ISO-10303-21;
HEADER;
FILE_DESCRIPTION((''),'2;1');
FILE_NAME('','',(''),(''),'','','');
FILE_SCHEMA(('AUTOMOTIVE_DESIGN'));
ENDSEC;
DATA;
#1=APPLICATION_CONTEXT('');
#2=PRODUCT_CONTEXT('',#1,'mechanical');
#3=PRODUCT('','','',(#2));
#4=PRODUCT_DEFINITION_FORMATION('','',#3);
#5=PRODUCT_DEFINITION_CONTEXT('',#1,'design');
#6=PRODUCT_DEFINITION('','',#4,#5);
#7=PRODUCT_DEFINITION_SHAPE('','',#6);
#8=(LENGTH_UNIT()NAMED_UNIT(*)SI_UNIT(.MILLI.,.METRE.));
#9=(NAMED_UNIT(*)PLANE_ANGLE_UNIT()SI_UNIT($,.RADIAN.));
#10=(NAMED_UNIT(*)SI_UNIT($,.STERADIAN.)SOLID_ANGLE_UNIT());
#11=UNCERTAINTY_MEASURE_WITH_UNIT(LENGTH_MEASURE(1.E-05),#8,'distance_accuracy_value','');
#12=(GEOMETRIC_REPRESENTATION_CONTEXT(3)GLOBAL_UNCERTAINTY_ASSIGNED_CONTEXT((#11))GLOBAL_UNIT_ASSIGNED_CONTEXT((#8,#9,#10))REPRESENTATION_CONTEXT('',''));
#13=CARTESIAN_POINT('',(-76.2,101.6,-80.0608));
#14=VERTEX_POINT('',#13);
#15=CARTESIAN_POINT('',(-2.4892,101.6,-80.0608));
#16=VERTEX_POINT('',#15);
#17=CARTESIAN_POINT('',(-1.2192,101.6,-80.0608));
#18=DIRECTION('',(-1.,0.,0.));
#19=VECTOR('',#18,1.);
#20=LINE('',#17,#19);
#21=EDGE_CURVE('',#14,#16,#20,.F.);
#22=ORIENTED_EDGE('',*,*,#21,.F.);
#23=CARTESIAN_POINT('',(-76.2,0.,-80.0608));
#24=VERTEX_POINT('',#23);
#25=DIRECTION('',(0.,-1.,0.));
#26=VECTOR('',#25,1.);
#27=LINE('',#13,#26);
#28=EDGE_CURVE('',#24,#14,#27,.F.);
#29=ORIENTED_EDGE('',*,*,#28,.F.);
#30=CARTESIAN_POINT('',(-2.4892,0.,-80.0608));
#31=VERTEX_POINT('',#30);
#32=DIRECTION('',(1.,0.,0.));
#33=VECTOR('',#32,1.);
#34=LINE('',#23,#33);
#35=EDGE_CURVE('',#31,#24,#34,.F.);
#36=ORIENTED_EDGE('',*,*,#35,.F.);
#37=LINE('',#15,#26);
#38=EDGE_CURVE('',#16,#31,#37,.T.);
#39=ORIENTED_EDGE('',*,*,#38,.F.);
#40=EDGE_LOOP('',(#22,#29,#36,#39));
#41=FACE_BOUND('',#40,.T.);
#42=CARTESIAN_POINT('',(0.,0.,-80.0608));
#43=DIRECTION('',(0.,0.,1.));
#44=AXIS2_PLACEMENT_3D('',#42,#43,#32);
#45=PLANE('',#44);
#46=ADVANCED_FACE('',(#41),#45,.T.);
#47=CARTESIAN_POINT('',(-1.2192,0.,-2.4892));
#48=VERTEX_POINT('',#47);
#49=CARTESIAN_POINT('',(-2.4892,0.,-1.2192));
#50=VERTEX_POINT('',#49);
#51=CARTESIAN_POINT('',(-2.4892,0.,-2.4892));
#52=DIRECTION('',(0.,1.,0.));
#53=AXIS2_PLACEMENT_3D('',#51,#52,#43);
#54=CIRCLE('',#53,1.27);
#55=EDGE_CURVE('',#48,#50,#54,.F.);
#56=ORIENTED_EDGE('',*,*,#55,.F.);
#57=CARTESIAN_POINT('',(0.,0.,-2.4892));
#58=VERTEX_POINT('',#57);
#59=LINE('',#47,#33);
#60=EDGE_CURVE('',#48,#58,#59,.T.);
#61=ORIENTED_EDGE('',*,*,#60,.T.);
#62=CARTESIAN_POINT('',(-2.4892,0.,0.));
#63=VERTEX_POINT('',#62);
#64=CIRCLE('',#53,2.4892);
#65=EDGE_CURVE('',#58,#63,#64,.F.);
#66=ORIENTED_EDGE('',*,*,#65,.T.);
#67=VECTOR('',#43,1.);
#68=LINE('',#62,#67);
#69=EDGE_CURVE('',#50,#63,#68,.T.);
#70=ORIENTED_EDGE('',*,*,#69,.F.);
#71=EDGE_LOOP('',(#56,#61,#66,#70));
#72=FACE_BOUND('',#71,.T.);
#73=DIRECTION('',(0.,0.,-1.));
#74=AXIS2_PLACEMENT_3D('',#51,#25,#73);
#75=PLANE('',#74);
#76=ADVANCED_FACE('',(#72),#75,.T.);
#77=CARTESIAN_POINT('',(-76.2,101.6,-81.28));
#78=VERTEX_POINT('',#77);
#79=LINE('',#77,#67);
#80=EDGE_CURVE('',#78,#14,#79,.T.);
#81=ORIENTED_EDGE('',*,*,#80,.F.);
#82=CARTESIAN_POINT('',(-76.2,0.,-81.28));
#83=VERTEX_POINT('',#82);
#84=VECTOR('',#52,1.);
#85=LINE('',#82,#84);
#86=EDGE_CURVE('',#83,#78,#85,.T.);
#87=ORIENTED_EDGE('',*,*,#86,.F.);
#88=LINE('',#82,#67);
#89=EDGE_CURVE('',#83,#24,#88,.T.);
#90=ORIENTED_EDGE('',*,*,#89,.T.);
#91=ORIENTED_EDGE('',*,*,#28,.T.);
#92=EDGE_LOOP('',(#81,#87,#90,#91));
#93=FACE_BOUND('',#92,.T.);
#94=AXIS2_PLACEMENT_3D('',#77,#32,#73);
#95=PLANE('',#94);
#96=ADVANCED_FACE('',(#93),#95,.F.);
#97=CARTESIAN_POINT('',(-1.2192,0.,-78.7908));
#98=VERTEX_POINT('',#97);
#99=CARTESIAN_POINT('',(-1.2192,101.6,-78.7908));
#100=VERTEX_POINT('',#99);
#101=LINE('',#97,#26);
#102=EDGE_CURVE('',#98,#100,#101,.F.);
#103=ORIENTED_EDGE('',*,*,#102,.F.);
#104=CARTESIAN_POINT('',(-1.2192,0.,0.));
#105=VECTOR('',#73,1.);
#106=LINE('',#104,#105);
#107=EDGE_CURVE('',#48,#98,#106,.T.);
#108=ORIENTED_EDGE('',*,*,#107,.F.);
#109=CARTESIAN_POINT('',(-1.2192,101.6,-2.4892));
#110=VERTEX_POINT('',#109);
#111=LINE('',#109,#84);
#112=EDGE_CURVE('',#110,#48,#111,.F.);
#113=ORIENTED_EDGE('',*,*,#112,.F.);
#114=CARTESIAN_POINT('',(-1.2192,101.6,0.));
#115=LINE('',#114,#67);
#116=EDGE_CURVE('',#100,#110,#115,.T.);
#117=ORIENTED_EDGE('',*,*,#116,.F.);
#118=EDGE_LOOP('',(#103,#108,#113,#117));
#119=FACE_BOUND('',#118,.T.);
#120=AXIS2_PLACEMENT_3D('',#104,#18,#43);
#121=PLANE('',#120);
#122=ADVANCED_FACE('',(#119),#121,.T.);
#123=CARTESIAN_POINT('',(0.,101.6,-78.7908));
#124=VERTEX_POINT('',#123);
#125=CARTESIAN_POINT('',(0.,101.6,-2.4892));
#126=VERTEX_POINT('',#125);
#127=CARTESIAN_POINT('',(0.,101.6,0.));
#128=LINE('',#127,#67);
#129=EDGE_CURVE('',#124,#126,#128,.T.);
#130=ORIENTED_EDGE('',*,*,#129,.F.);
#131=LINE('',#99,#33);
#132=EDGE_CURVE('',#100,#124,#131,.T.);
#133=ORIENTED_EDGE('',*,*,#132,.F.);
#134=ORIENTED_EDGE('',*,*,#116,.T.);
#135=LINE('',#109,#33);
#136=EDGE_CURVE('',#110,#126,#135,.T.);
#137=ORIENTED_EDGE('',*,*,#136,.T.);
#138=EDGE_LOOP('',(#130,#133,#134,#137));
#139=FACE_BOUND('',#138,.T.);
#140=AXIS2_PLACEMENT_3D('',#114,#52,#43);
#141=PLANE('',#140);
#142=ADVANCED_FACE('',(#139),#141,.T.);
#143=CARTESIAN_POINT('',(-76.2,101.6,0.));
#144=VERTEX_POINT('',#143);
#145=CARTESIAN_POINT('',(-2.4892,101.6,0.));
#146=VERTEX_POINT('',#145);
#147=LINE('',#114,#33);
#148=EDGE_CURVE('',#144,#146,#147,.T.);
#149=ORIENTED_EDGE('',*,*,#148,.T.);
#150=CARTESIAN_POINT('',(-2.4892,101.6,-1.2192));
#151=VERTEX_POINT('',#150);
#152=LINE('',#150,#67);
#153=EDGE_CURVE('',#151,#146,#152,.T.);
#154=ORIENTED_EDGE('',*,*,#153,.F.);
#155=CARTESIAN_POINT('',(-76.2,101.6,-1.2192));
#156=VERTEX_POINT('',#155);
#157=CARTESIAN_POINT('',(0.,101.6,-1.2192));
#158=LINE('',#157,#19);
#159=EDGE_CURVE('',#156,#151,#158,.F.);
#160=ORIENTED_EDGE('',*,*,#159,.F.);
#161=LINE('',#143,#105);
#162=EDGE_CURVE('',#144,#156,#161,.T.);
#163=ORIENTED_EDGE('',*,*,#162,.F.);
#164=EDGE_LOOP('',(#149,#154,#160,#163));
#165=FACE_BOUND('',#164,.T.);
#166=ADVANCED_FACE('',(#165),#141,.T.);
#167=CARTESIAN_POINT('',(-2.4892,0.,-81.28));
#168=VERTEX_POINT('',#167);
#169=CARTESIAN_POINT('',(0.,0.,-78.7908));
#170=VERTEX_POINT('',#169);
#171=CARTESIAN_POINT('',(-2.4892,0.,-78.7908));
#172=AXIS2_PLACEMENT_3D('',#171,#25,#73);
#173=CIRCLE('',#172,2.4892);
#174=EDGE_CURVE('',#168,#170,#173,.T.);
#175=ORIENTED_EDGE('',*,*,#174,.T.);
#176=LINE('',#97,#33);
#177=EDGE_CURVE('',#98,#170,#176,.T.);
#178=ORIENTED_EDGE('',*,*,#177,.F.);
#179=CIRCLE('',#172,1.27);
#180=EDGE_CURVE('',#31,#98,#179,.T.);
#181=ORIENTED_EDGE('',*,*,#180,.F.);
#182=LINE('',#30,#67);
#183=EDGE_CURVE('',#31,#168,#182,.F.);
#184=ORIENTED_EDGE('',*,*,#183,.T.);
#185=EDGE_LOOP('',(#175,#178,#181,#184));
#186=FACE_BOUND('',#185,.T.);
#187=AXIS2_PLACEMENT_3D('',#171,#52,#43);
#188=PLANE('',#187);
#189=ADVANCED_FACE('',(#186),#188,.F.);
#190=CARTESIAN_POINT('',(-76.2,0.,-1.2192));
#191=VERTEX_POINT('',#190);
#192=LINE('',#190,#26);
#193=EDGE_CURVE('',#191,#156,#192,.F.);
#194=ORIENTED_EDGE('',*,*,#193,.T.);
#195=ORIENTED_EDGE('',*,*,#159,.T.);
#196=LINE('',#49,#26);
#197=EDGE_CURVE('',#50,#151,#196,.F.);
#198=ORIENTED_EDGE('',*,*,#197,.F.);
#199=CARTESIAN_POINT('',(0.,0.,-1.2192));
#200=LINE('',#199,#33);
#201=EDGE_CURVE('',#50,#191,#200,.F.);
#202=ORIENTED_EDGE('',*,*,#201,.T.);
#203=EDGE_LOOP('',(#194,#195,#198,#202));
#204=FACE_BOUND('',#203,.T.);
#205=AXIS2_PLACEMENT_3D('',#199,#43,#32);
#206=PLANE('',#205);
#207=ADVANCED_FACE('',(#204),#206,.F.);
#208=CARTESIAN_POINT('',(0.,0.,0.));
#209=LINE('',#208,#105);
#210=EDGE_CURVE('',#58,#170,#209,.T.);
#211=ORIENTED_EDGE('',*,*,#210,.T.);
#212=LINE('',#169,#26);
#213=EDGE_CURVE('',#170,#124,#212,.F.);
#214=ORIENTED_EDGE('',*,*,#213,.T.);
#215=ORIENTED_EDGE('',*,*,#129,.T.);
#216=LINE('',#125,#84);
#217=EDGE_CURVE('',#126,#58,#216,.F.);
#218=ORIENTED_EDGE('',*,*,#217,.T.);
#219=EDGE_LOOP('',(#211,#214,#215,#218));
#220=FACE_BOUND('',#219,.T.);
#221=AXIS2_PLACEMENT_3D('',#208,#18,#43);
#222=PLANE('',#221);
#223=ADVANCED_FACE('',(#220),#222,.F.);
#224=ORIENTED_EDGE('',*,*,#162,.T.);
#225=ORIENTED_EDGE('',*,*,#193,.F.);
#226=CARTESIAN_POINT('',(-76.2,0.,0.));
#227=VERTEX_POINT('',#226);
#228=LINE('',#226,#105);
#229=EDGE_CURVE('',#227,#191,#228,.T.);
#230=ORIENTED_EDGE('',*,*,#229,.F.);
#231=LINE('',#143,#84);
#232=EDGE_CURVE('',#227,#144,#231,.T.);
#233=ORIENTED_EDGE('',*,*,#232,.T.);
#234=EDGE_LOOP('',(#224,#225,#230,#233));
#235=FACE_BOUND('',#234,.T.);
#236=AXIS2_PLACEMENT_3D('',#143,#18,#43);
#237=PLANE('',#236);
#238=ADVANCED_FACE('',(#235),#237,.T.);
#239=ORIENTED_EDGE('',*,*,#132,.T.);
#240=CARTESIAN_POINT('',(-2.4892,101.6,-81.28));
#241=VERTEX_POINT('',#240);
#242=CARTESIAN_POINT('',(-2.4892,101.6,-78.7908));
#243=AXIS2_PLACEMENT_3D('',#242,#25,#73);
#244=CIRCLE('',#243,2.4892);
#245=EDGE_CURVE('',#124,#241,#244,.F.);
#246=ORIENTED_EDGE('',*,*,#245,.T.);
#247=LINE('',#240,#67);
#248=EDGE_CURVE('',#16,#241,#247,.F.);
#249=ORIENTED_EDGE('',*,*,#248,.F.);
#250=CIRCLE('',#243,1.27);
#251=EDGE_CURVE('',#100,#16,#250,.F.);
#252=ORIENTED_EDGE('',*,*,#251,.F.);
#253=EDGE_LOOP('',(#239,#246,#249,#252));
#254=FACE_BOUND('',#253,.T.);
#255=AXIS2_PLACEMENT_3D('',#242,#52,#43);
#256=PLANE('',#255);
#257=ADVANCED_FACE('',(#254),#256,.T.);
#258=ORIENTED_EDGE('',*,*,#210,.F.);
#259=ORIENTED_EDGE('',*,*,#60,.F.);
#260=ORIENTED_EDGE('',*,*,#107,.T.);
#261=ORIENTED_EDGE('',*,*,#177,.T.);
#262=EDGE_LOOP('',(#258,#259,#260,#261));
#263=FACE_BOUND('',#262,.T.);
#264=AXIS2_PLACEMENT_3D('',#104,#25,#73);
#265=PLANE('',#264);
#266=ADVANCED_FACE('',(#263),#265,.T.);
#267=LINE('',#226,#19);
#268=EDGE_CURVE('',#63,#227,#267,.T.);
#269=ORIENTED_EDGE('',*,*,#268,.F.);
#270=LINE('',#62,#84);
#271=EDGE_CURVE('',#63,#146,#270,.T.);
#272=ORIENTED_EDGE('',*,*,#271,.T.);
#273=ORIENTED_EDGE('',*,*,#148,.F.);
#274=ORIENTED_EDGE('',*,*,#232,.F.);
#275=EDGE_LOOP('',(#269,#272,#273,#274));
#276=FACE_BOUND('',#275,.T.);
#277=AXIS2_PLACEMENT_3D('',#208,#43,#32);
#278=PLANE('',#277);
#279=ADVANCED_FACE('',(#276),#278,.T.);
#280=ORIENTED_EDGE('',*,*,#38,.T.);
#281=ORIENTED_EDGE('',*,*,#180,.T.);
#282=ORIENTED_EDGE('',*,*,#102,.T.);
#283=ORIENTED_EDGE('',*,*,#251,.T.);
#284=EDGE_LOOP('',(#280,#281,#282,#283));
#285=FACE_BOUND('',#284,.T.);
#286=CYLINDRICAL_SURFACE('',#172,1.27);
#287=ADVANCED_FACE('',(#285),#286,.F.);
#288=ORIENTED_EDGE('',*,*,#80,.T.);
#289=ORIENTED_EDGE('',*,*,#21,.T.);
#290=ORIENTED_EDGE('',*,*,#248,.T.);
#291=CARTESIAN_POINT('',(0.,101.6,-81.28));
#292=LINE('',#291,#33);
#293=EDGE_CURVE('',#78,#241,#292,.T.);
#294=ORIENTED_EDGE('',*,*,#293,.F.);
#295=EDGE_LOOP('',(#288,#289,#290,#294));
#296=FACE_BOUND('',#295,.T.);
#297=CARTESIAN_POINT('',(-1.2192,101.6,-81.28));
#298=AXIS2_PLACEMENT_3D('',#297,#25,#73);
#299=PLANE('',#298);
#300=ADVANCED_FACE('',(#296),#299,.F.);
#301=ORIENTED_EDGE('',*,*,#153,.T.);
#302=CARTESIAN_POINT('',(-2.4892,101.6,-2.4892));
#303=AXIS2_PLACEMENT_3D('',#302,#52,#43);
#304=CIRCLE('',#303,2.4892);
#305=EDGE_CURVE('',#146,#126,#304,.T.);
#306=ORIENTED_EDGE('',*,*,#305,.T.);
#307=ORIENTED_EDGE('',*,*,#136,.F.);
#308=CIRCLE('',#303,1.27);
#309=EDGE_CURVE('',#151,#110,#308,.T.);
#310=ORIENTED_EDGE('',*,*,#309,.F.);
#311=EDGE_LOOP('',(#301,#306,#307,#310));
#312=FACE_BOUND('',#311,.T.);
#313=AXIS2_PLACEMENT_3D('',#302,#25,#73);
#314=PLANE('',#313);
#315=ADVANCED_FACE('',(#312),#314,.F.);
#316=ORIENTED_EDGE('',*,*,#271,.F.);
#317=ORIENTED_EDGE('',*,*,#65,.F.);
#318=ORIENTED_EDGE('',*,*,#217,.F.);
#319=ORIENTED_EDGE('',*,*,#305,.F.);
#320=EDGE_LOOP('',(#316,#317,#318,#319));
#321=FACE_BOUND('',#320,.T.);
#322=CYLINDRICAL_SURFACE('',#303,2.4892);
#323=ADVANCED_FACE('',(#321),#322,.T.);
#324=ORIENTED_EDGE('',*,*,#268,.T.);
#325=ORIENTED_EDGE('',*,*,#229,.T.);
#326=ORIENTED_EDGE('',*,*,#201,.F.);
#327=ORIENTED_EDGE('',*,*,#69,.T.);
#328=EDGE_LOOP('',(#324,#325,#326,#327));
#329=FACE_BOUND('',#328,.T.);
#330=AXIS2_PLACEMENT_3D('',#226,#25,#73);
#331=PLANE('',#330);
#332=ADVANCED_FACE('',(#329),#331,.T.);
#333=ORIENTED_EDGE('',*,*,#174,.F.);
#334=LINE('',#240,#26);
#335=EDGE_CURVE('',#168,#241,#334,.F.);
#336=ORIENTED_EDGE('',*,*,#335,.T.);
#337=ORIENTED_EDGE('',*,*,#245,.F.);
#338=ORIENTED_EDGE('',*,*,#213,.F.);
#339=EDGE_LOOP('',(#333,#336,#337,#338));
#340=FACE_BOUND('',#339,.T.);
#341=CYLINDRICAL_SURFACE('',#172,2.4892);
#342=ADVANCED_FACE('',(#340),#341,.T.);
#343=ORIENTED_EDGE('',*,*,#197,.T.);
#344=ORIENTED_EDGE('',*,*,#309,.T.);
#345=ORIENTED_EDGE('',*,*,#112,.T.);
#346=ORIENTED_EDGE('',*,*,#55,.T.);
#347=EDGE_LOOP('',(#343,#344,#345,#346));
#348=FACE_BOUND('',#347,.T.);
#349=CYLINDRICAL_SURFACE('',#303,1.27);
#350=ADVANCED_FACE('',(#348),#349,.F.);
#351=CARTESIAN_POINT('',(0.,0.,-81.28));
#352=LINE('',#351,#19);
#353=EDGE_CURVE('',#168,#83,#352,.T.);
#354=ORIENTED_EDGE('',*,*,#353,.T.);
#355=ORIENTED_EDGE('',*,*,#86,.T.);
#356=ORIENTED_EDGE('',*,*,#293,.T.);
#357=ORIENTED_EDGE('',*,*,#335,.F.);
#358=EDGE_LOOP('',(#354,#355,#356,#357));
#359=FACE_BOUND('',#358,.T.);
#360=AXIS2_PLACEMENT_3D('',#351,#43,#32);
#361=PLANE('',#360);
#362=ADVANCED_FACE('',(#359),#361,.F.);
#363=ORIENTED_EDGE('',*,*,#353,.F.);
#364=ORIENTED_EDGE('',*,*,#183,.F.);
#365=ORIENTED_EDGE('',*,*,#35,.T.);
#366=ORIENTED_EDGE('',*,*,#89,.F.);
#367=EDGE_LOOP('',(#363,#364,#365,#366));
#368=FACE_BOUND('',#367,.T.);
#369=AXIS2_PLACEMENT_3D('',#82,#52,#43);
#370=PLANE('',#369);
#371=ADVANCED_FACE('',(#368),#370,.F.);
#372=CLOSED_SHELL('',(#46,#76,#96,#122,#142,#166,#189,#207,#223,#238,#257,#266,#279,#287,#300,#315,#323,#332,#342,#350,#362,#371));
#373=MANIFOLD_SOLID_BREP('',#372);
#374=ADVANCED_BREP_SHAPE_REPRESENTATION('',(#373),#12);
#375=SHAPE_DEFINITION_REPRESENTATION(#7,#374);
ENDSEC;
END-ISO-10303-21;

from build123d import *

# Parameters (mm, degrees)
SKETCH1_W                    = 81.28
SKETCH1_H                    = 101.6
BASE_FLANGE1_DEPTH           = 1.2192
EDGE_FLANGE1_STRIP_W         = 7.4168
EDGE_FLANGE1_STRIP_H         = 1.2192
EDGE_FLANGE1_STRIP_CUT_DEPTH = 101.6
EDGE_FLANGE1_DEPTH           = 101.6
EDGE_FLANGE2_STRIP_W         = 7.4168
EDGE_FLANGE2_STRIP_H         = 1.2192
EDGE_FLANGE2_STRIP_CUT_DEPTH = 101.6
EDGE_FLANGE2_DEPTH           = 101.6


# Sheet-metal steps are written as plain solids
with BuildPart() as part:
    # Sketch1 → Base-Flange1 (new body)
    with BuildSketch(Plane(origin=(0, 0, 0), x_dir=(0, 0, -1), z_dir=(1, 0, 0))):
        with Locations((40.64, 50.8)):
            Rectangle(SKETCH1_W, SKETCH1_H)
    extrude(amount=-BASE_FLANGE1_DEPTH)

    # Edge-Flange1 strip (across the edge) → Edge-Flange1 strip cut (cut)
    with BuildSketch(Plane(origin=(-1.2192, 0, 0), x_dir=(0, 0, -1), z_dir=(0, 1, 0))):
        with Locations((-1.2192, -0.6096)):
            Rectangle(EDGE_FLANGE1_STRIP_W, EDGE_FLANGE1_STRIP_H)
    extrude(amount=EDGE_FLANGE1_STRIP_CUT_DEPTH, mode=Mode.SUBTRACT)

    # Edge-Flange1 section (across the edge) → Edge-Flange1 (add)
    with BuildSketch(Plane(origin=(-1.2192, 0, 0), x_dir=(0, 0, -1), z_dir=(0, 1, 0))):
        with BuildLine():
            Line((0, 1.27), (0, 74.9808))
            Line((0, 74.9808), (1.2192, 74.9808))
            Line((1.2192, 74.9808), (1.2192, 1.27))
            ThreePointArc((1.2192, 1.27), (1.591174388, 0.371974388), (2.4892, 0))
            Line((2.4892, 0), (2.4892, -1.2192))
            ThreePointArc((2.4892, -1.2192), (0.7290698, -0.4901302), (0, 1.27))
        make_face()
    extrude(amount=EDGE_FLANGE1_DEPTH)

    # Edge-Flange2 strip (across the edge) → Edge-Flange2 strip cut (cut)
    with BuildSketch(Plane(origin=(-1.2192, 101.6, -81.28), x_dir=(0, 0, 1), z_dir=(0, -1, 0))):
        with Locations((-1.2192, -0.6096)):
            Rectangle(EDGE_FLANGE2_STRIP_W, EDGE_FLANGE2_STRIP_H)
    extrude(amount=EDGE_FLANGE2_STRIP_CUT_DEPTH, mode=Mode.SUBTRACT)

    # Edge-Flange2 section (across the edge) → Edge-Flange2 (add)
    with BuildSketch(Plane(origin=(-1.2192, 101.6, -81.28), x_dir=(0, 0, 1), z_dir=(0, -1, 0))):
        with BuildLine():
            Line((0, 1.27), (0, 74.9808))
            Line((0, 74.9808), (1.2192, 74.9808))
            Line((1.2192, 74.9808), (1.2192, 1.27))
            ThreePointArc((1.2192, 1.27), (1.591174388, 0.371974388), (2.4892, 0))
            Line((2.4892, 0), (2.4892, -1.2192))
            ThreePointArc((2.4892, -1.2192), (0.7290698, -0.4901302), (0, 1.27))
        make_face()
    extrude(amount=EDGE_FLANGE2_DEPTH)


solid = part.part
